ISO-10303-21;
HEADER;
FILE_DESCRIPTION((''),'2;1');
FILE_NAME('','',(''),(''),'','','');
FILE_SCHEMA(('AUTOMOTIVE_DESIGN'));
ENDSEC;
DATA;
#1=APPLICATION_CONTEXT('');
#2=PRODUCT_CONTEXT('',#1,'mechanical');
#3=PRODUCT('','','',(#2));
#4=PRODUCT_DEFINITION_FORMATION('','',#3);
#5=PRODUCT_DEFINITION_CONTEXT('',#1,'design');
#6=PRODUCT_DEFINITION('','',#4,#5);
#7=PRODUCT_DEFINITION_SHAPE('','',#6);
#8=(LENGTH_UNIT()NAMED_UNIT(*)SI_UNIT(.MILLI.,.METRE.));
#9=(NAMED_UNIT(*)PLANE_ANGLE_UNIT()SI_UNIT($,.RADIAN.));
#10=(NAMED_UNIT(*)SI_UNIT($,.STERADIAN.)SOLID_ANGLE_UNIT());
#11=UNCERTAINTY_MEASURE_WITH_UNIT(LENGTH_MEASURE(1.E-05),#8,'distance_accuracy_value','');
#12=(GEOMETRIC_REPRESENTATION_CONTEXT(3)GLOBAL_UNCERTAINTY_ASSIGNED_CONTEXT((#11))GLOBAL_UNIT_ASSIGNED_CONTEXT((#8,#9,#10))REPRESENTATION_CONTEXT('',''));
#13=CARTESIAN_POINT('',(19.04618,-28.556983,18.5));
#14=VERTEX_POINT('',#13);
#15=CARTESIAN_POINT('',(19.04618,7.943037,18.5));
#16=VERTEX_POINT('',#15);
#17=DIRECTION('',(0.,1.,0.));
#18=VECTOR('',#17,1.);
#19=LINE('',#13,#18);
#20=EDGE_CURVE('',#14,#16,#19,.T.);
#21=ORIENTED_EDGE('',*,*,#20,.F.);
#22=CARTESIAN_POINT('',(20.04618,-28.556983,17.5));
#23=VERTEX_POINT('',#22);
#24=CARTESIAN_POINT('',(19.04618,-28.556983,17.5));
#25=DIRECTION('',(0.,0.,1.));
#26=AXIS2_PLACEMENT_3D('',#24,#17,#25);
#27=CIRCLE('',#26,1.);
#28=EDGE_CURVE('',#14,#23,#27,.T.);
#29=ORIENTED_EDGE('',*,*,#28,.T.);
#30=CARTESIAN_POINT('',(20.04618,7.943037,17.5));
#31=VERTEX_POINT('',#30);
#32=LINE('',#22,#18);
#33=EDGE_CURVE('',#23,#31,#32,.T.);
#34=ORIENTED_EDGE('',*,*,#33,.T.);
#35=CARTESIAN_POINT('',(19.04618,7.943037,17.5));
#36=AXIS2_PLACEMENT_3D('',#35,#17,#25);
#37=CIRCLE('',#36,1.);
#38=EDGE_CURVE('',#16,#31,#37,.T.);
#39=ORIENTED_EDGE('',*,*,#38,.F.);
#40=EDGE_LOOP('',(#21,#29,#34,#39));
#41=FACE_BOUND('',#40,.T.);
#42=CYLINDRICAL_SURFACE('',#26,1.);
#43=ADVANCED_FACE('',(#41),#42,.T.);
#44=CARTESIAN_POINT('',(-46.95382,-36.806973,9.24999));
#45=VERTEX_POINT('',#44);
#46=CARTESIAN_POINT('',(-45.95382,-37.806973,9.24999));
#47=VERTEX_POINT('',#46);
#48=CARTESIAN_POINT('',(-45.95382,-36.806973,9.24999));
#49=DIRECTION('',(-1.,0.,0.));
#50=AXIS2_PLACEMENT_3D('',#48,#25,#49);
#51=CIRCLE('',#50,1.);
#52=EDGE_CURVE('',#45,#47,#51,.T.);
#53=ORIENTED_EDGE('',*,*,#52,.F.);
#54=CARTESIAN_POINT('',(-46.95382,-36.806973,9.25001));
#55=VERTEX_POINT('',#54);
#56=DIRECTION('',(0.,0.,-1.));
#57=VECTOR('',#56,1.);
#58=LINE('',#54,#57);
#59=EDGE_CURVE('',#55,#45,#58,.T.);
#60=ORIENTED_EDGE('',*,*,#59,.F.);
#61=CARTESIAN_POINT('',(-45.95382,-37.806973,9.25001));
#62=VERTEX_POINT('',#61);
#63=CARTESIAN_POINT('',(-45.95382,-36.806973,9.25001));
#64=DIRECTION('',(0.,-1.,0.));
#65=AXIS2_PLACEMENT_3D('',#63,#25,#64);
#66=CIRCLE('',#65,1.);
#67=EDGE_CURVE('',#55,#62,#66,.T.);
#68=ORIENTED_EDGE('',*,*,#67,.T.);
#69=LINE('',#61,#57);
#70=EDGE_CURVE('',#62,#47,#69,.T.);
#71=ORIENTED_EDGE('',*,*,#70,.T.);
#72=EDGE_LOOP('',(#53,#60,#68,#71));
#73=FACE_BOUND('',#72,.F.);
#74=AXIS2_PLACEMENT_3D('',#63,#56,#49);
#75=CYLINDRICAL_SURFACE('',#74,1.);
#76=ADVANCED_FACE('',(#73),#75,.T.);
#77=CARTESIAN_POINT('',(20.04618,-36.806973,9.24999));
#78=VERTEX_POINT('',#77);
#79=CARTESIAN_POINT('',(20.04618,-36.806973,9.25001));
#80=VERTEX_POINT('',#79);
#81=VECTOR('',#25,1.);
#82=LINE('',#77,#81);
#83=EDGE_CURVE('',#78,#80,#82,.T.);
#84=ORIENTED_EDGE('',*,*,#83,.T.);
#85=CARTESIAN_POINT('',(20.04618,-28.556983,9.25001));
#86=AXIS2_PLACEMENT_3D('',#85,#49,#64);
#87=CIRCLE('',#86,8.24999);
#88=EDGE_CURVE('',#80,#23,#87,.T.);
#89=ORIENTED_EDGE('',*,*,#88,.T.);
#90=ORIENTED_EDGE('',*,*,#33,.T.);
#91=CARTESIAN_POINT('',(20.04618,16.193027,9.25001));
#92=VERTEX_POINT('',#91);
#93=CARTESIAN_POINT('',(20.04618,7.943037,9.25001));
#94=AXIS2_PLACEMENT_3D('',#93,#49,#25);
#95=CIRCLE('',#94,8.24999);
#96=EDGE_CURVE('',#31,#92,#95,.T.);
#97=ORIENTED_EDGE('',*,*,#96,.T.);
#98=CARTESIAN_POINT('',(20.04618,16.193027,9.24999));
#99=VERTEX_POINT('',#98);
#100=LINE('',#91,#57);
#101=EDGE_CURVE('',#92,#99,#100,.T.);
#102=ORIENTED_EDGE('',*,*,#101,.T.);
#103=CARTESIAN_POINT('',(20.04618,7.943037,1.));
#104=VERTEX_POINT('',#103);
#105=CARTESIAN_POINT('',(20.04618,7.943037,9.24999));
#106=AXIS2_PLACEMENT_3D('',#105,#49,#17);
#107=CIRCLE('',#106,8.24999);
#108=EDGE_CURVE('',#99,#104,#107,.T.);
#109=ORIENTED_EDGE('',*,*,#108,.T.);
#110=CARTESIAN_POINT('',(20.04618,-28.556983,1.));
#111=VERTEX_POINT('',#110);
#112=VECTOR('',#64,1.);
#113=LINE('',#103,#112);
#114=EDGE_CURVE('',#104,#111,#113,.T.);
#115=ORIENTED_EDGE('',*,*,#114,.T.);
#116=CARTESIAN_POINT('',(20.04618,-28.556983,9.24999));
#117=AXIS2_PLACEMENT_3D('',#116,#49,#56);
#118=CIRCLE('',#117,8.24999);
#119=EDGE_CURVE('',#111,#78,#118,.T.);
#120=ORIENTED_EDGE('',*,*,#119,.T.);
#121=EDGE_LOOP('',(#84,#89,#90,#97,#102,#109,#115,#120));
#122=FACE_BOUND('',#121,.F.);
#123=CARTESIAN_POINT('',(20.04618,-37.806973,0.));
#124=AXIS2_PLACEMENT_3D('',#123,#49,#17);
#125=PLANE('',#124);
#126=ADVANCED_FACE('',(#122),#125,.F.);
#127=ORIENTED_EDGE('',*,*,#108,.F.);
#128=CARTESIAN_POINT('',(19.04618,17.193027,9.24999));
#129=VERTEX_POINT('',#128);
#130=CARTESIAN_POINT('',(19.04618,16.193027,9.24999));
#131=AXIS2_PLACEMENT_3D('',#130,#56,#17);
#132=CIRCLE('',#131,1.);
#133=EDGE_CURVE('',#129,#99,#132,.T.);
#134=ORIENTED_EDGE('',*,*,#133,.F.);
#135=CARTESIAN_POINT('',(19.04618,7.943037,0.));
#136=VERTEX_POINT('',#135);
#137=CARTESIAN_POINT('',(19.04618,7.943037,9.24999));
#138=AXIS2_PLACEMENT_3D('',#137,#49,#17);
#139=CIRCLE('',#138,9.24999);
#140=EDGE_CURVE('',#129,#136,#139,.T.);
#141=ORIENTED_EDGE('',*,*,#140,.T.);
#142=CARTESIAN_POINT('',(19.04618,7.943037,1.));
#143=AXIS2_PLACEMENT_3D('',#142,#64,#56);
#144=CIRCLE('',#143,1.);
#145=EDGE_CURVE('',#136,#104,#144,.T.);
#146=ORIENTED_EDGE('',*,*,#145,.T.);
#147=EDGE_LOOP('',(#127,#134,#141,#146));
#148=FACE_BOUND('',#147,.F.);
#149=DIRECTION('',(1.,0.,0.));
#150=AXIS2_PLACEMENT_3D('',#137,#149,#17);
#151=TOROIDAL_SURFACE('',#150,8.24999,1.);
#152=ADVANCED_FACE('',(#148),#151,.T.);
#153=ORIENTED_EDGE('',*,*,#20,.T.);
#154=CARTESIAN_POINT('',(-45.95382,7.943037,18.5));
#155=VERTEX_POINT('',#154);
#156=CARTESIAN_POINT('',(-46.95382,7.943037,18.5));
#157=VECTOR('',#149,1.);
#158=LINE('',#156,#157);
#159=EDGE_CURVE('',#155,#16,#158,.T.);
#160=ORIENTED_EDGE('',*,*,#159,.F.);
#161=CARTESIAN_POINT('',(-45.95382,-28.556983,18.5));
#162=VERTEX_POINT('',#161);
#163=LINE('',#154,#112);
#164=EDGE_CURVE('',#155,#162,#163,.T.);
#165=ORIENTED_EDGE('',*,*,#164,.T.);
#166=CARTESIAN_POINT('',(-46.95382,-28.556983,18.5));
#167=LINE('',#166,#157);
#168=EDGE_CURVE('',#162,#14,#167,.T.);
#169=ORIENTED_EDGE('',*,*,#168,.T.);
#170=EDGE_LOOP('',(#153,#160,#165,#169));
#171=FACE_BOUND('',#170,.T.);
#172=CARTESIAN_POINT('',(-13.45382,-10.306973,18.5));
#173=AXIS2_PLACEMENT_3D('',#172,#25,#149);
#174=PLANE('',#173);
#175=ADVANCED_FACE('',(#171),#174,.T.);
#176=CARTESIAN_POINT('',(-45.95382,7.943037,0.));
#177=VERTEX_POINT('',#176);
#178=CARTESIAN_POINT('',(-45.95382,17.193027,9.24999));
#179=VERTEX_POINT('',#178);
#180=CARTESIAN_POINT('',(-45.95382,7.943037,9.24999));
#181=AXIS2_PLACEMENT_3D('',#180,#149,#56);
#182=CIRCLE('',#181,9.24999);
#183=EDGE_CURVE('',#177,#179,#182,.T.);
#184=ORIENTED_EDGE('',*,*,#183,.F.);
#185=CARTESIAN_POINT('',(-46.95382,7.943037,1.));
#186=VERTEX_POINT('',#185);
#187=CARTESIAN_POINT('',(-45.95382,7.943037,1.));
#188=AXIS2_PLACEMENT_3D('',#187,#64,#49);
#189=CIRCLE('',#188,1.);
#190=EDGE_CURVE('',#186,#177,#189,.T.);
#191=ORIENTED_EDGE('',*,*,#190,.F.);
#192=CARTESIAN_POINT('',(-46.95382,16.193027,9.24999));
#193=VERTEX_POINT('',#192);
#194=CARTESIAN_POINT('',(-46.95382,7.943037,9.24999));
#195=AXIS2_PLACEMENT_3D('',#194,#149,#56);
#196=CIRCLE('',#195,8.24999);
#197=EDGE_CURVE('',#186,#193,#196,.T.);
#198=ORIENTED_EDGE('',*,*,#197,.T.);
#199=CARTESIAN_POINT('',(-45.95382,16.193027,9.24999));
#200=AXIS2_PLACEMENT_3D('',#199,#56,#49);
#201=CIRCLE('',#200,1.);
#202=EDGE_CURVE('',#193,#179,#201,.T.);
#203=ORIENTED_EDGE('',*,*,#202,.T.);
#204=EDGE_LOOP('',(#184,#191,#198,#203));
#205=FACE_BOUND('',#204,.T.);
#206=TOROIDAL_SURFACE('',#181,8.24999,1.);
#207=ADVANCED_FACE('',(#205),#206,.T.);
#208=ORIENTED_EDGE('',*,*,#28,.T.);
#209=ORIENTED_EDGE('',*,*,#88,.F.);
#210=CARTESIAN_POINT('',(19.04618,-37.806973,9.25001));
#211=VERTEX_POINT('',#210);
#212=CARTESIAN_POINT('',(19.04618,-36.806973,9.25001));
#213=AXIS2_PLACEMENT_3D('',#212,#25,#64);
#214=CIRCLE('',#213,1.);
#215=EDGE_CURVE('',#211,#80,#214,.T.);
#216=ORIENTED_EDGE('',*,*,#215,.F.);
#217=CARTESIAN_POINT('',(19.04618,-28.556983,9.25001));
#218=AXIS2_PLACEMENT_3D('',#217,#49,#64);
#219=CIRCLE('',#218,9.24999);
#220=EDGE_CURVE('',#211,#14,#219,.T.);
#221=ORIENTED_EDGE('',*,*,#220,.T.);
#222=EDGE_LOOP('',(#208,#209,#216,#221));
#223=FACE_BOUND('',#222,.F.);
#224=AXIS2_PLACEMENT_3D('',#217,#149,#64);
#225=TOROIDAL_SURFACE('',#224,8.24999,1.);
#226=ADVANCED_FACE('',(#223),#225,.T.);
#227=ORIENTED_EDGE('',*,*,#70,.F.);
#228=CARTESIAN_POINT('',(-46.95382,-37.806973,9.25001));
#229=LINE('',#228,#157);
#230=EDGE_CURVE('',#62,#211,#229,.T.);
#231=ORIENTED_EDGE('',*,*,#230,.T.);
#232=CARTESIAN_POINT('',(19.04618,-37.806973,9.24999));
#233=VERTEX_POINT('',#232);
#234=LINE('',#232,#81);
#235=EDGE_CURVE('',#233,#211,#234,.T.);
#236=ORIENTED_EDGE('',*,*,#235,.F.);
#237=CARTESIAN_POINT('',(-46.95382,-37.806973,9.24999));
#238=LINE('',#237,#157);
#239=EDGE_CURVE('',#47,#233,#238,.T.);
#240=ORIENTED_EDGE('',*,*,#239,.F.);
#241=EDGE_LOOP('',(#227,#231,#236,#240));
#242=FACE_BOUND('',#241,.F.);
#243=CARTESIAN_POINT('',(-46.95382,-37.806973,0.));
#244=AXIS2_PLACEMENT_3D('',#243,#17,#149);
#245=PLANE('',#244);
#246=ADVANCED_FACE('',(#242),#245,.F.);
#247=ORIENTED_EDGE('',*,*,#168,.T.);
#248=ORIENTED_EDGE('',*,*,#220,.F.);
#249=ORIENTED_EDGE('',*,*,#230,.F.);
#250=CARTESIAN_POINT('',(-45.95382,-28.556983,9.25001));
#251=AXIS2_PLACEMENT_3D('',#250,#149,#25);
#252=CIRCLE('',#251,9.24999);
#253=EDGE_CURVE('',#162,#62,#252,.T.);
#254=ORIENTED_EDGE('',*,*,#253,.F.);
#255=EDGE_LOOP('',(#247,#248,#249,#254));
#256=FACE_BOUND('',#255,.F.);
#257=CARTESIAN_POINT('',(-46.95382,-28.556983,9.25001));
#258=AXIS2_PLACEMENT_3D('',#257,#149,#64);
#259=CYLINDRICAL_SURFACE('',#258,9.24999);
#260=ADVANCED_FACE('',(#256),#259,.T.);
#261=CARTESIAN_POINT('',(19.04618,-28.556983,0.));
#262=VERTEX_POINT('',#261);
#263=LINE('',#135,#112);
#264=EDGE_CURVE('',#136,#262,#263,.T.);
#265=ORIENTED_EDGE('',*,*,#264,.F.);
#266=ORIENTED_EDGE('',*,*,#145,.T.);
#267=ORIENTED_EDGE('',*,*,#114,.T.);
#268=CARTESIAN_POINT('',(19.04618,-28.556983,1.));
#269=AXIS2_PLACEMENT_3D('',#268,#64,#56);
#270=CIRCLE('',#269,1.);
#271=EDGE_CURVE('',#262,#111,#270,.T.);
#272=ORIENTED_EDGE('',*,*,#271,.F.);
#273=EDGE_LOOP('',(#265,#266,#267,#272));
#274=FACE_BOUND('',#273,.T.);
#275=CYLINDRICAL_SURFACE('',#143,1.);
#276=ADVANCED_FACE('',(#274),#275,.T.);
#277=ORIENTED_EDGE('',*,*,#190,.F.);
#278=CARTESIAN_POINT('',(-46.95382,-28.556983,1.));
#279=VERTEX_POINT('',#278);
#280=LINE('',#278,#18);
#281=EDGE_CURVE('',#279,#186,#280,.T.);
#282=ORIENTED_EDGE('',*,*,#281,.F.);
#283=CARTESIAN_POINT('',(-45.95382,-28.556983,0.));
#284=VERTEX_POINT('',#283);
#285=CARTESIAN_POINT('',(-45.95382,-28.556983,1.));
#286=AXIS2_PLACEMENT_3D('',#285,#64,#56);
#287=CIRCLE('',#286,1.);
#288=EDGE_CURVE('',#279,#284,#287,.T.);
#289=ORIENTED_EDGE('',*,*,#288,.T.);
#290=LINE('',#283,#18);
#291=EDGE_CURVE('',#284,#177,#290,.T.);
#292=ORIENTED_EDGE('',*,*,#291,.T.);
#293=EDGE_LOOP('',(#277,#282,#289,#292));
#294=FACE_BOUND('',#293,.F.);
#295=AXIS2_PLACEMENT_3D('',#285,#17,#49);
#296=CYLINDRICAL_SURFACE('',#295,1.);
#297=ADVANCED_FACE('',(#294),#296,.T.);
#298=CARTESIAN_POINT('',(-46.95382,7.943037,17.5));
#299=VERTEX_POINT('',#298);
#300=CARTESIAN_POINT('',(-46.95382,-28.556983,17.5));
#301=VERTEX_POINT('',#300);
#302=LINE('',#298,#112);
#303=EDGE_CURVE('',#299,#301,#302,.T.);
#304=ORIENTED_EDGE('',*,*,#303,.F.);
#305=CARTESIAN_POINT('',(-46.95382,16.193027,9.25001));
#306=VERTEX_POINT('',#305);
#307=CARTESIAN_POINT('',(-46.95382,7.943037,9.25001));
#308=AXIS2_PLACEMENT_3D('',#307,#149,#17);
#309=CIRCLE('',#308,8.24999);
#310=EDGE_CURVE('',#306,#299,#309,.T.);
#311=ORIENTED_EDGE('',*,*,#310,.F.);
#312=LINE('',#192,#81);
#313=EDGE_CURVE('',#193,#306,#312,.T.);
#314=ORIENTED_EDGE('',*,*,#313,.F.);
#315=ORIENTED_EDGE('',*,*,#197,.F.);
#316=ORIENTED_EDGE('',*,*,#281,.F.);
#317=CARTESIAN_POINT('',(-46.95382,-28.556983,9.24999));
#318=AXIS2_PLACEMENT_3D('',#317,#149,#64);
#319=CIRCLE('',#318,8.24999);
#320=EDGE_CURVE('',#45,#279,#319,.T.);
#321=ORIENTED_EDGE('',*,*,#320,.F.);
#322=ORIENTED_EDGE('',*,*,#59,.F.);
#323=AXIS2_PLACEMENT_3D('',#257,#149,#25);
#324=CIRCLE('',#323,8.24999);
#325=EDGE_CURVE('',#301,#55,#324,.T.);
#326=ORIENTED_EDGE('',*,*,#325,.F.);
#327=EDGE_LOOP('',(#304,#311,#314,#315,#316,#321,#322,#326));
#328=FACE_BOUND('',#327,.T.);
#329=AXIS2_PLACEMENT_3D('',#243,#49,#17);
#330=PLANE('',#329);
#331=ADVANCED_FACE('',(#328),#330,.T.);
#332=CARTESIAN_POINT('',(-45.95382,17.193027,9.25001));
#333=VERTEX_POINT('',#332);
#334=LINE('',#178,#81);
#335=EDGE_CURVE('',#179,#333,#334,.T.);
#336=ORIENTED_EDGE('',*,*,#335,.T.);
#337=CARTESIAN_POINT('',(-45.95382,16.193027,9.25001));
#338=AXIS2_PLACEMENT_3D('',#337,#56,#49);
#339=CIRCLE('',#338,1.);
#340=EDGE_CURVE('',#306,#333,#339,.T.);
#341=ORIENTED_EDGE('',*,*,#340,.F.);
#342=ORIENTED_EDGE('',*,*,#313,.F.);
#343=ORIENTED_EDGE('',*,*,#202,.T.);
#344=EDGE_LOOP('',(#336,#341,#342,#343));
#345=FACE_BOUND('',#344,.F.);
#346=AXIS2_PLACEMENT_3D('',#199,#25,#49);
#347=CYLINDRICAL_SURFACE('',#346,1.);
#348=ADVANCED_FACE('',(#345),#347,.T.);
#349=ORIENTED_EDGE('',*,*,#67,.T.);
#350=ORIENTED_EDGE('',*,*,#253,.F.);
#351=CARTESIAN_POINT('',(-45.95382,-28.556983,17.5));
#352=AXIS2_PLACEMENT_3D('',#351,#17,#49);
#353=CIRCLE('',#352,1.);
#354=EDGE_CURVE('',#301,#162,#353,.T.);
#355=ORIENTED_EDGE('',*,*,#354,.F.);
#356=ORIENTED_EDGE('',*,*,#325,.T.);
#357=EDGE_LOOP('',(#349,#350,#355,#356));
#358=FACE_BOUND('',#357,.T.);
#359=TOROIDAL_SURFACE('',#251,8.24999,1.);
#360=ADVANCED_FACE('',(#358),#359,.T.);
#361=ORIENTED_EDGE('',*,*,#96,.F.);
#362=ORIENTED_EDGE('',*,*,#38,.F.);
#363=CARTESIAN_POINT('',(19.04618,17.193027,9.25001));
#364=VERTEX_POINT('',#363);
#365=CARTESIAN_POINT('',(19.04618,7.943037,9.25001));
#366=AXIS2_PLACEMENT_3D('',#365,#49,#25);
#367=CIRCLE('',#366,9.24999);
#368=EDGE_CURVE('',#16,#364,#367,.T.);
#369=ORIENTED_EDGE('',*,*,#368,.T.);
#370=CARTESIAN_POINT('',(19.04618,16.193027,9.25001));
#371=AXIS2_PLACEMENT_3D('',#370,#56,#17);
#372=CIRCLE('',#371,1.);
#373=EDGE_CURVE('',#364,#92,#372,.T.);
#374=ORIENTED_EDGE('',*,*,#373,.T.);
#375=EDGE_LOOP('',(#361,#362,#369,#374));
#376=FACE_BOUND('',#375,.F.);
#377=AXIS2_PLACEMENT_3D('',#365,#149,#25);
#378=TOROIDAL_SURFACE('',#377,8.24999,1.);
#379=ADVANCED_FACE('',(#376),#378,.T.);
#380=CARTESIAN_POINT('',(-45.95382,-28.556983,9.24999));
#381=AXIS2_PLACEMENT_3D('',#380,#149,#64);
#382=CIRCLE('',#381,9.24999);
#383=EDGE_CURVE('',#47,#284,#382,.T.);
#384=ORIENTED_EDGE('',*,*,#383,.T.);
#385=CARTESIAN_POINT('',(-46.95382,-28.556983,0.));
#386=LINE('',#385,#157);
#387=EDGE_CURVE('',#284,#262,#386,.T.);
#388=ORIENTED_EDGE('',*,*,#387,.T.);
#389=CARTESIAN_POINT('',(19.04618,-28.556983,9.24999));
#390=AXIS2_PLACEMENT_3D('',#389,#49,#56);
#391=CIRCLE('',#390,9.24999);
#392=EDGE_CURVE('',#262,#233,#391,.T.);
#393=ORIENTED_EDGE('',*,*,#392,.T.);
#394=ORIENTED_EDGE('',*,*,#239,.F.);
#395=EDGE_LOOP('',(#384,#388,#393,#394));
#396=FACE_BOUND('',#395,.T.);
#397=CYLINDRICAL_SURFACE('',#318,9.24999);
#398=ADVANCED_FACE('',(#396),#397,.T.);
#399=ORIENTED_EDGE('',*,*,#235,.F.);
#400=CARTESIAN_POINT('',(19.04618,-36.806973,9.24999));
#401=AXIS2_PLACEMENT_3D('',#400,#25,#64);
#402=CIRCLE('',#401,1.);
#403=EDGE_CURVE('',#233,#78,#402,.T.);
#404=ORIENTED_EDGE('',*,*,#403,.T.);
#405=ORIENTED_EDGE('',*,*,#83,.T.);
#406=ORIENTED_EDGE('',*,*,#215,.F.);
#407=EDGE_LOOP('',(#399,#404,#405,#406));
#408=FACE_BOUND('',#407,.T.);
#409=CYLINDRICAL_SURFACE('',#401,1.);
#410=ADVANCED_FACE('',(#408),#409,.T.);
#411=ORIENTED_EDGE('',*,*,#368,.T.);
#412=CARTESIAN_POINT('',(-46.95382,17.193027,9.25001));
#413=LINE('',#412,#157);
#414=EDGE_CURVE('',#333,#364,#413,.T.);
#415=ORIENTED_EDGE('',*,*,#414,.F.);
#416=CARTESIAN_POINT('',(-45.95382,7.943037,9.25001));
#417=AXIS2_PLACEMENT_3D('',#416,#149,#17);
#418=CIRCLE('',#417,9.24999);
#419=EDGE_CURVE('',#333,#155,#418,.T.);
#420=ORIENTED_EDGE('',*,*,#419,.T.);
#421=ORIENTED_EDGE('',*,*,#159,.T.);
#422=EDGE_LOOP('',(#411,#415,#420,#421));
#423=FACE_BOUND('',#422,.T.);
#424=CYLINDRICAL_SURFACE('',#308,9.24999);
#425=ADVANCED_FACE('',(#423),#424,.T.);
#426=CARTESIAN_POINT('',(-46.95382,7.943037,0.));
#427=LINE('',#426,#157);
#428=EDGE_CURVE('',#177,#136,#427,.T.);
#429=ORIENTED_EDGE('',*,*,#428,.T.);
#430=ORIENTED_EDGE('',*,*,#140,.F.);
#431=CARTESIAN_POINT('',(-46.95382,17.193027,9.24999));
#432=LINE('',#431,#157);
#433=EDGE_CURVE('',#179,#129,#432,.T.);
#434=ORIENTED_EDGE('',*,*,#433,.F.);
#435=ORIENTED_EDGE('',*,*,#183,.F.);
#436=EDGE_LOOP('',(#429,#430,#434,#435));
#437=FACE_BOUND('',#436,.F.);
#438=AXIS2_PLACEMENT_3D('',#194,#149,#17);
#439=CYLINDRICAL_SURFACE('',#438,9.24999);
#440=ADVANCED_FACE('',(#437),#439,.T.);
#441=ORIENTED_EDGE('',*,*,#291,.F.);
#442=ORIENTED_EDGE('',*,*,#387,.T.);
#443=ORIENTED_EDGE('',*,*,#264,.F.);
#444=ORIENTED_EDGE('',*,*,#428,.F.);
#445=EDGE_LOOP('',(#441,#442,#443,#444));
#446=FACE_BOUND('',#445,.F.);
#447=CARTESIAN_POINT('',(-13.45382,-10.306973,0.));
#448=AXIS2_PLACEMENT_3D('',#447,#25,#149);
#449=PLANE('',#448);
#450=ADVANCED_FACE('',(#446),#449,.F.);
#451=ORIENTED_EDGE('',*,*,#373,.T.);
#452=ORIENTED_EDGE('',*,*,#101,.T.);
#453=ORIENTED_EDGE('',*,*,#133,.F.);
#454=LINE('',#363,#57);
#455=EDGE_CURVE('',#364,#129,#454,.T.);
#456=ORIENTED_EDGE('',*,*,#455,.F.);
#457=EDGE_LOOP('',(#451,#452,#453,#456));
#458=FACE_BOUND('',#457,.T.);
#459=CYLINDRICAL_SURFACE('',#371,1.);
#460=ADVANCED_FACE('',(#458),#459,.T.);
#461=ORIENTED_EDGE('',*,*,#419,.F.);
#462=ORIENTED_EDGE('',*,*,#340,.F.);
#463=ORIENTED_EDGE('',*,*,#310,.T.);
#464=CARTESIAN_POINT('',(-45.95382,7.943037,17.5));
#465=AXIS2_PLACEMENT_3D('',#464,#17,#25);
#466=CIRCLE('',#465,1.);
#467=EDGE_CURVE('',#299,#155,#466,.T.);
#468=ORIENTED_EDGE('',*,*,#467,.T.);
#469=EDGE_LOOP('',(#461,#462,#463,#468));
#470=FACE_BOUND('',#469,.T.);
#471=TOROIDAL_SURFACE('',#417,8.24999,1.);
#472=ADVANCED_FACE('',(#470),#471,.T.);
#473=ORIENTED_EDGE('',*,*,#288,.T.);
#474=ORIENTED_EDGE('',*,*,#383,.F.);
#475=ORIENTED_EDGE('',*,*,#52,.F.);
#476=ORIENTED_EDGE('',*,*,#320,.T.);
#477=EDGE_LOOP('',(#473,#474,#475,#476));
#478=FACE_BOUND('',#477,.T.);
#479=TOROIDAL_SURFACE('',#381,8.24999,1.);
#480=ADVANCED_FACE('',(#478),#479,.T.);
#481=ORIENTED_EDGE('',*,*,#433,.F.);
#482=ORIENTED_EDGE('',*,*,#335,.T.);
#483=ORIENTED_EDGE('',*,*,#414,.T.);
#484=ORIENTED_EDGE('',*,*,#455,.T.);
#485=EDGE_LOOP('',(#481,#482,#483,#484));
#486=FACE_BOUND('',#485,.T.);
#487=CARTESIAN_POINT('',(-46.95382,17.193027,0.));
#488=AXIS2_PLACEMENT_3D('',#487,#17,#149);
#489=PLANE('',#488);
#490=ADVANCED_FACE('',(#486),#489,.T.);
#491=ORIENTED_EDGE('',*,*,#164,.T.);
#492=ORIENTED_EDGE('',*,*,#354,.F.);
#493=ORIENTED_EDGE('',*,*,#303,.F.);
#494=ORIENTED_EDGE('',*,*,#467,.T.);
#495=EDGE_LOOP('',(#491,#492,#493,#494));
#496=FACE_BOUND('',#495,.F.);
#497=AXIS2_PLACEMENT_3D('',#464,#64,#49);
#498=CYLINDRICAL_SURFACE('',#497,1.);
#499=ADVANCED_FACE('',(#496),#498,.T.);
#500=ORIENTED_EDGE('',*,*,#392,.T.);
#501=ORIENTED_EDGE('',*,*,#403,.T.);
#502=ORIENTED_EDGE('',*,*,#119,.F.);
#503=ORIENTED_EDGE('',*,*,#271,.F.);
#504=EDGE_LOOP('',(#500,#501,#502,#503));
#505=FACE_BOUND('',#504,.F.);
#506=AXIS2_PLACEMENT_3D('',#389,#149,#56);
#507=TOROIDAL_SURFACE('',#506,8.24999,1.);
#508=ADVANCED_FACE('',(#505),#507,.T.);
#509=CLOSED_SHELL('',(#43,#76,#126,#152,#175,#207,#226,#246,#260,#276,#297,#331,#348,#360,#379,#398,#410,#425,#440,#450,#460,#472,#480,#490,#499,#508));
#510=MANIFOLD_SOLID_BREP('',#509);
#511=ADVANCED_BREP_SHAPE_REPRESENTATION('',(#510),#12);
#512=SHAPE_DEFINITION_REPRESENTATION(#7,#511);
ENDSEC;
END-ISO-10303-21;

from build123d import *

# Parameters (mm, degrees)
F1_W     = 67
F1_H     = 55
F2_DEPTH = 18.5
F3_R     = 9.24999
F4_R     = 1


# Not quite as in the source:
# - a fillet or chamfer is up to 0.001 mm smaller than in the source, because OpenCascade refuses the exact size


with BuildPart() as f2:
    # F1 (on Top) → F2 (new body)
    with BuildSketch(Plane.XY):
        with Locations((-13.4538196921, -10.3069728613)):
            Rectangle(F1_W, F1_H)
    extrude(amount=F2_DEPTH)

    # F3 (radius 9.25 in the source; OpenCascade refuses exactly that, so slightly less here)
    f3_edges = [f2.edges().sort_by_distance(p)[0] for p in [
        (-13.45382, 17.193027, 18.5),
        (-13.45382, 17.193027, 0),
        (-13.45382, -37.806973, 18.5),
        (-13.45382, -37.806973, 0),
    ]]
    fillet(f3_edges, radius=F3_R)

    # F4
    f4_edges = [f2.edges().sort_by_distance(p)[0] for p in [
        (20.04618, -37.806973, 9.25),
        (20.04618, -35.097714, 2.709259),
        (20.04618, -35.097714, 15.790741),
        (20.04618, -10.306973, 0),
        (20.04618, -10.306973, 18.5),
        (20.04618, 14.483768, 2.709259),
        (20.04618, 14.483768, 15.790741),
        (20.04618, 17.193027, 9.25),
        (-46.95382, 17.193027, 9.25),
        (-46.95382, 14.483768, 2.709259),
        (-46.95382, 14.483768, 15.790741),
        (-46.95382, -10.306973, 0),
        (-46.95382, -10.306973, 18.5),
        (-46.95382, -35.097714, 2.709259),
        (-46.95382, -35.097714, 15.790741),
        (-46.95382, -37.806973, 9.25),
    ]]
    fillet(f4_edges, radius=F4_R)


solid = f2.part
